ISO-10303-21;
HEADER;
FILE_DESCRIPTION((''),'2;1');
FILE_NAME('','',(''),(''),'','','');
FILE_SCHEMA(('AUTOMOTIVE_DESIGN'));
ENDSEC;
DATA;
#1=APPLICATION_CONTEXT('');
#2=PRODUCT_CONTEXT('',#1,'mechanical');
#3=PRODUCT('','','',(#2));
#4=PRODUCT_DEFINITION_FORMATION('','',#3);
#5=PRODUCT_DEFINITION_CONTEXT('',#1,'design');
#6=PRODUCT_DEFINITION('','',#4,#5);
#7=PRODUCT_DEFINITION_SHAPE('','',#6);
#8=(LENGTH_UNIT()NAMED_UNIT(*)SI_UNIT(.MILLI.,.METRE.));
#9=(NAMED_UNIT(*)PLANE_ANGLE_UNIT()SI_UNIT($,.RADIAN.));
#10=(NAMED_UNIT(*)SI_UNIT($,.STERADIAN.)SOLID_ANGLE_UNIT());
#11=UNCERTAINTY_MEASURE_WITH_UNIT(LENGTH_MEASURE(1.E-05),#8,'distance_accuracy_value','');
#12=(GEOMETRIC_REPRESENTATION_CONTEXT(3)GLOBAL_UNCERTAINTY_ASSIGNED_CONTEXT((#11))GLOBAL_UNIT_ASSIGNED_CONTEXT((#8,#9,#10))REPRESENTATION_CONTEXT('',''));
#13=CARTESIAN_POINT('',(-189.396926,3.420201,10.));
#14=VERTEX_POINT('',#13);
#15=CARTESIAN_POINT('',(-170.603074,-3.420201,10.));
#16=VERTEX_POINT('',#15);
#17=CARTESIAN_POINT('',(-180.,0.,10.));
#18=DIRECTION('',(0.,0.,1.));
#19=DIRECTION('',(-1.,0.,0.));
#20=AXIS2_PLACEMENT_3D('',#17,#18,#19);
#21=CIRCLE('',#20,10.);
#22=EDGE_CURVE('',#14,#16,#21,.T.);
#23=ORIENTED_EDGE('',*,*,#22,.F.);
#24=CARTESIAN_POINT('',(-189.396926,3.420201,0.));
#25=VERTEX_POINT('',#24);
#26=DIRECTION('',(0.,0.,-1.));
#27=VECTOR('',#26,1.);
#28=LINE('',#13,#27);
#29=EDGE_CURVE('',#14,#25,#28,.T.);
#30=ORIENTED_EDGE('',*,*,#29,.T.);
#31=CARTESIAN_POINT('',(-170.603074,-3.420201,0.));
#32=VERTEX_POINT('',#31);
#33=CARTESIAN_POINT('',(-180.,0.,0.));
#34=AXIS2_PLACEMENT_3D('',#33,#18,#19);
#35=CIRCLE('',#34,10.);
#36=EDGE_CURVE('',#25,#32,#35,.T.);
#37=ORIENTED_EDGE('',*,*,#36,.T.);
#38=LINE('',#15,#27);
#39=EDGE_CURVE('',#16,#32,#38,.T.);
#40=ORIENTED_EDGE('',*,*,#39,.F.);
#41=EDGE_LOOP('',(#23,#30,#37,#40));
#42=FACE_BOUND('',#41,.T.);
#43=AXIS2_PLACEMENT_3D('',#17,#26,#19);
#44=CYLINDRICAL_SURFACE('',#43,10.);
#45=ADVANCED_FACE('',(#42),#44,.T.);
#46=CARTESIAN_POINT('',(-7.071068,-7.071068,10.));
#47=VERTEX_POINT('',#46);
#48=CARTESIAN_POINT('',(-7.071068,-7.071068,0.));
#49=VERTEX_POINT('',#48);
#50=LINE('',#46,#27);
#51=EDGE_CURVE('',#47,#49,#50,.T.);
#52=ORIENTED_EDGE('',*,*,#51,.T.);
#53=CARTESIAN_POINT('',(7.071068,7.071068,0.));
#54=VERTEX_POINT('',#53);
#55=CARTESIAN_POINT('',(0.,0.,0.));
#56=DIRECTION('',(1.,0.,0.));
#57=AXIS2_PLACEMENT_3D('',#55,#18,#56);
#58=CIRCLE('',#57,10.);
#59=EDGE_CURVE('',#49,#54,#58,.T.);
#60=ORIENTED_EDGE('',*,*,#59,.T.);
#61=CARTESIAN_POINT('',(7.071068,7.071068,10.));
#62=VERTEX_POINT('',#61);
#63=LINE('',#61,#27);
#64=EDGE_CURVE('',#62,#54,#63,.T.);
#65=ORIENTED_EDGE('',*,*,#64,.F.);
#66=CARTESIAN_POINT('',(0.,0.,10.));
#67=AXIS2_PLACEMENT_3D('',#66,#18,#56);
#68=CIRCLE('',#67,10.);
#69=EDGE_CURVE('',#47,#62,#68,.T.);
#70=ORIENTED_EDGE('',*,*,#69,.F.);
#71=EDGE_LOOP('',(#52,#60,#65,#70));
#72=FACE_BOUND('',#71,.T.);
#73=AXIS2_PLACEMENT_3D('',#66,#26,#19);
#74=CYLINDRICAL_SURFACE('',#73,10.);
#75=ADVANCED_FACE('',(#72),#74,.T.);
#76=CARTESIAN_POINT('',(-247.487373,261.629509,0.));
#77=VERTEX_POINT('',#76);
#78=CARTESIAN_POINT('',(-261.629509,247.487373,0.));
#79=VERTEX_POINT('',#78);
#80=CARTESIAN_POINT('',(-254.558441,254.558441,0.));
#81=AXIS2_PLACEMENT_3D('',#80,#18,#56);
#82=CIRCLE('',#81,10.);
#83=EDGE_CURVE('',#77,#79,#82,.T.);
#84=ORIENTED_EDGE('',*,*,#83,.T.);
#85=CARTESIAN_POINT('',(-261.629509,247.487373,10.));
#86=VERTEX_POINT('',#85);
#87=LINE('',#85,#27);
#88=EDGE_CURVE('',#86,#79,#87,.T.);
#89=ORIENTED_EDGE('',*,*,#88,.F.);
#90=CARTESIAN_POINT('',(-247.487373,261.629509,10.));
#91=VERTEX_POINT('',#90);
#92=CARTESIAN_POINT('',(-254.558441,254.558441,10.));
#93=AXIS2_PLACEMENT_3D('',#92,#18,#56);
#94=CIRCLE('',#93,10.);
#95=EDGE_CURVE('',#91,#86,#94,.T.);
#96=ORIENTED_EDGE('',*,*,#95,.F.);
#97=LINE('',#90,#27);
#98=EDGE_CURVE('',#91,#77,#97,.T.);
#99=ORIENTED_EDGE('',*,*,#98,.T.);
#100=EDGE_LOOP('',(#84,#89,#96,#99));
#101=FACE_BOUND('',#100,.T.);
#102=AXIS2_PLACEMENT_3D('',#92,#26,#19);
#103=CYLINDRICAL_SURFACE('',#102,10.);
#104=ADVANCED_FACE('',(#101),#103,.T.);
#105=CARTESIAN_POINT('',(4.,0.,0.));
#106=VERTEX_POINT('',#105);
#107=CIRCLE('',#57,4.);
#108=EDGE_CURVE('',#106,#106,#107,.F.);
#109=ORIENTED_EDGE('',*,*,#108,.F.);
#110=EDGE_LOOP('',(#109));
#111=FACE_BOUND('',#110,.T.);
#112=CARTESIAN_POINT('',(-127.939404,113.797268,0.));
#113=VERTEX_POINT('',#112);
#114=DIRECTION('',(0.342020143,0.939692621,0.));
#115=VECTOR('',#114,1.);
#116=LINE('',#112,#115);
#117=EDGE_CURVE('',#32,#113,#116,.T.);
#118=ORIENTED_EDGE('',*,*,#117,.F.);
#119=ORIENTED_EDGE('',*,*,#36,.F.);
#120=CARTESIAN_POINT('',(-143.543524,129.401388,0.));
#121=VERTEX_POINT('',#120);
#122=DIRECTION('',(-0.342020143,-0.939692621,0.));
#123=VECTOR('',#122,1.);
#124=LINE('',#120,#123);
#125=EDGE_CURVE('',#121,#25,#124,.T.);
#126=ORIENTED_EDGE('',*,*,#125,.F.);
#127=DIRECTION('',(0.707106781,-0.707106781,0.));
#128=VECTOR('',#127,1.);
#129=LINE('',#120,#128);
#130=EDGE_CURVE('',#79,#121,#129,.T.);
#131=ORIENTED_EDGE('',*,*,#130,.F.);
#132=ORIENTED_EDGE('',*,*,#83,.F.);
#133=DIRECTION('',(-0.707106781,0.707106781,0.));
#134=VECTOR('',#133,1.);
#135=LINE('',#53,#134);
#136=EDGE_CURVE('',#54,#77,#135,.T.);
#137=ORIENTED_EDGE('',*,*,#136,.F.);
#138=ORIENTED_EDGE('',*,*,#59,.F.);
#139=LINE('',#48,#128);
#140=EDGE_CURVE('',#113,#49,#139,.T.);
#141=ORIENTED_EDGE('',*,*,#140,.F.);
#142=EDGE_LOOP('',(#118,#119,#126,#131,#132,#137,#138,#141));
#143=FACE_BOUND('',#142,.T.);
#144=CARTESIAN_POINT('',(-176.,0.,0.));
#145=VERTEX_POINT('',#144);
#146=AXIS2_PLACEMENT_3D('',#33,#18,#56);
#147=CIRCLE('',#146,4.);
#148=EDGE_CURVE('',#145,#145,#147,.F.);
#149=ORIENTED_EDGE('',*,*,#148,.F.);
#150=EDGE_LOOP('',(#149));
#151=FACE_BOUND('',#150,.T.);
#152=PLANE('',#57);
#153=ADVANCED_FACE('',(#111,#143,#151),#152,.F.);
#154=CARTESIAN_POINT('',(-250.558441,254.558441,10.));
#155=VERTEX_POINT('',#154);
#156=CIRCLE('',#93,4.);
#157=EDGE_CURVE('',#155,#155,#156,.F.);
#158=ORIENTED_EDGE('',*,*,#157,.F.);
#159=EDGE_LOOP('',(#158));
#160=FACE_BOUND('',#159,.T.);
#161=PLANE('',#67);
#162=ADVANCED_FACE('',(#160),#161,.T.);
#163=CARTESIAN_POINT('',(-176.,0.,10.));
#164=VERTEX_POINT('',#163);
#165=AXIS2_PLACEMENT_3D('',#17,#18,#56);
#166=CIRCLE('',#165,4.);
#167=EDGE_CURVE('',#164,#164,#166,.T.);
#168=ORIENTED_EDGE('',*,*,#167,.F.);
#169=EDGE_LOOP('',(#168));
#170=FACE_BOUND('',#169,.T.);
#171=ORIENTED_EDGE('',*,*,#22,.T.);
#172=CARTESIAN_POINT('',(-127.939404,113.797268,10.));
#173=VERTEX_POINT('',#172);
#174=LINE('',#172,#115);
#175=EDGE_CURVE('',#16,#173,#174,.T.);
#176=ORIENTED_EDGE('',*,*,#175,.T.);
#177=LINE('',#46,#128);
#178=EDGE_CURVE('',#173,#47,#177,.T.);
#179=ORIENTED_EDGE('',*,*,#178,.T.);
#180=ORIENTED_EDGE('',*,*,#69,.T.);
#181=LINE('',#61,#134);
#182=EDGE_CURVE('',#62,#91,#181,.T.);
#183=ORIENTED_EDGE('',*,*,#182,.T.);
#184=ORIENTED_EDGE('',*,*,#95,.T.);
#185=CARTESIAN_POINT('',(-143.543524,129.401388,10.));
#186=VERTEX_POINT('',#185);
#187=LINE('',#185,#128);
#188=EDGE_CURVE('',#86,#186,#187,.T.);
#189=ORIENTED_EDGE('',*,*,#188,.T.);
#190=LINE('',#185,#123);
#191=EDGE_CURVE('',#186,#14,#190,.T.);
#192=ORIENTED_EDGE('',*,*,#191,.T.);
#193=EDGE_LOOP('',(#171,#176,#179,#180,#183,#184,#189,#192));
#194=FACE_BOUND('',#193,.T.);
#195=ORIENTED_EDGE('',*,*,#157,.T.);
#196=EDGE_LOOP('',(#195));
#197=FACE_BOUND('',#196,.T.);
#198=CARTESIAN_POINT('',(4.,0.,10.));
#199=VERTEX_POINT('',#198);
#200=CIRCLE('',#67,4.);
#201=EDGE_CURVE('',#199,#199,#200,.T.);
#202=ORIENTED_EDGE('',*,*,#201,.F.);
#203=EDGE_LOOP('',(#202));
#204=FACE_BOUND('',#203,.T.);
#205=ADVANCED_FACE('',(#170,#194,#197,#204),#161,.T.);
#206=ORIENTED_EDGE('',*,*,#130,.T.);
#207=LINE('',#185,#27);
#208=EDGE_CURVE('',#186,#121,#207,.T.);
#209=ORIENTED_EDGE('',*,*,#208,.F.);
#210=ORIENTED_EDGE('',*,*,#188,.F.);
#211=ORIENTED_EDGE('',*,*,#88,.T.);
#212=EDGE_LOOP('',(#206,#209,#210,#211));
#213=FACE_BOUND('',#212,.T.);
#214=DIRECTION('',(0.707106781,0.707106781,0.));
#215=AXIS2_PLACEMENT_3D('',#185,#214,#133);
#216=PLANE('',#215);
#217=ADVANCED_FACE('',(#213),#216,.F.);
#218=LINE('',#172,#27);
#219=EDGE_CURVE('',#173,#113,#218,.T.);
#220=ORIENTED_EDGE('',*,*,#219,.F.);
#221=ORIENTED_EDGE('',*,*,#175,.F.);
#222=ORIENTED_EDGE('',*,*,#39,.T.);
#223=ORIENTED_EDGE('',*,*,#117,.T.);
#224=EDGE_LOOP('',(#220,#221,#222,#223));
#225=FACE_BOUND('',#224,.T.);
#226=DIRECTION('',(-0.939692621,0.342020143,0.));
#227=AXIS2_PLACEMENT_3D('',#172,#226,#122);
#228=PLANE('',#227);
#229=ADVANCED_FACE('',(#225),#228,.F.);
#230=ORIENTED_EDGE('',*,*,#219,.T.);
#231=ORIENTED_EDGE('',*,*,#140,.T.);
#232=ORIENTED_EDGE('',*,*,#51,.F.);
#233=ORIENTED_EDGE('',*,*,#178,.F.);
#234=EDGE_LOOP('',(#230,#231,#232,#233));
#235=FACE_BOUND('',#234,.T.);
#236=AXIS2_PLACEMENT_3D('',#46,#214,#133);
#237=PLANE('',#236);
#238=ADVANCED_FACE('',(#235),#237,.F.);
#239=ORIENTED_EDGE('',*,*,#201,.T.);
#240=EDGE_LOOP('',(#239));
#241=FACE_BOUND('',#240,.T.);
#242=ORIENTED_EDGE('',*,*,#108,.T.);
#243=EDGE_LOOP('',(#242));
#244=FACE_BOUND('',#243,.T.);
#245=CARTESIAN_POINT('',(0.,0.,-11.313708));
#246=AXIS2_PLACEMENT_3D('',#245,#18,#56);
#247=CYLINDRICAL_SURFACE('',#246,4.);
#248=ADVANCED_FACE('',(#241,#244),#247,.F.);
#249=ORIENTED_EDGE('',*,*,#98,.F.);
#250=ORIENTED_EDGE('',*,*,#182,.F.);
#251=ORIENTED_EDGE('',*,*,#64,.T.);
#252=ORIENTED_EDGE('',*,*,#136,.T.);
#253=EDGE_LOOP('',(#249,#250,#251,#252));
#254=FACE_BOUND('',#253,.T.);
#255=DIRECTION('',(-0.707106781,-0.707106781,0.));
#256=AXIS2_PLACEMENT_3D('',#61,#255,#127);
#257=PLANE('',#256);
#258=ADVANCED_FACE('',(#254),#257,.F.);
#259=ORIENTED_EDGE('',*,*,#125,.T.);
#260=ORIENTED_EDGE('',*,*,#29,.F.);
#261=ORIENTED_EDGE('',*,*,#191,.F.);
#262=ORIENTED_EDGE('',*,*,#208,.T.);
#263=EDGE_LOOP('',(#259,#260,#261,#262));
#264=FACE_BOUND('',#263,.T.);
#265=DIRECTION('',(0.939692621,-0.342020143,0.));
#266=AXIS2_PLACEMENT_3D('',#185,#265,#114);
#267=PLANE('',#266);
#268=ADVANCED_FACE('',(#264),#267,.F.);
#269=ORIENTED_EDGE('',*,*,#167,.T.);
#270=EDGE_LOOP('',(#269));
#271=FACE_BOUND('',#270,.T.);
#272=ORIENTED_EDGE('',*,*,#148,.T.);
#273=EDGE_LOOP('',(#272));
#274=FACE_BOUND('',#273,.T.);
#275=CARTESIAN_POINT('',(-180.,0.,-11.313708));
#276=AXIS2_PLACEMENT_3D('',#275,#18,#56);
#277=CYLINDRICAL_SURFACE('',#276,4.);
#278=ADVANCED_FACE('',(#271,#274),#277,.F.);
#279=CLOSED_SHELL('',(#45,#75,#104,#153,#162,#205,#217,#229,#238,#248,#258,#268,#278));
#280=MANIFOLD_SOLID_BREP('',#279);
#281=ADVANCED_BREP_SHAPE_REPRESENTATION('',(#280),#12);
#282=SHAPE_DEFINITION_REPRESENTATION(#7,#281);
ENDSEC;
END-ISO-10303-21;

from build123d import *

# Parameters (mm, degrees)
BOSS_EXTRUDE1_DEPTH = 10
SKETCH2_R           = 4
CUT_EXTRUDE1_DEPTH  = 10


# Read off the part's stored shape, not the designer's step: Boss-Extrude1
with BuildPart() as part:
    # Boss-Extrude1 outline → Boss-Extrude1 (new body)
    with BuildSketch(Plane.XY):
        with BuildLine():
            ThreePointArc((-7.071067812, -7.071067812), (7.071067812, -7.071067812), (7.071067812, 7.071067812))
            Line((7.071067812, 7.071067812), (-247.487373415, 261.629509039))
            ThreePointArc((-247.487373415, 261.629509039), (-261.629509039, 261.629509039), (-261.629509039, 247.487373415))
            Line((-261.629509039, 247.487373415), (-143.543524061, 129.401388437))
            Line((-143.543524061, 129.401388437), (-189.396926208, 3.420201433))
            ThreePointArc((-189.396926208, 3.420201433), (-183.420201433, -9.396926208), (-170.603073792, -3.420201433))
            Line((-170.603073792, -3.420201433), (-127.939403887, 113.797268263))
            Line((-127.939403887, 113.797268263), (-7.071067812, -7.071067812))
        make_face()
    extrude(amount=BOSS_EXTRUDE1_DEPTH)

    # Sketch2 → Cut-Extrude1 (cut)
    with BuildSketch(Plane.XY.offset(10)):
        Circle(SKETCH2_R)
        with Locations((-180, 0)):
            Circle(SKETCH2_R)
    extrude(amount=-CUT_EXTRUDE1_DEPTH, mode=Mode.SUBTRACT)


solid = part.part
